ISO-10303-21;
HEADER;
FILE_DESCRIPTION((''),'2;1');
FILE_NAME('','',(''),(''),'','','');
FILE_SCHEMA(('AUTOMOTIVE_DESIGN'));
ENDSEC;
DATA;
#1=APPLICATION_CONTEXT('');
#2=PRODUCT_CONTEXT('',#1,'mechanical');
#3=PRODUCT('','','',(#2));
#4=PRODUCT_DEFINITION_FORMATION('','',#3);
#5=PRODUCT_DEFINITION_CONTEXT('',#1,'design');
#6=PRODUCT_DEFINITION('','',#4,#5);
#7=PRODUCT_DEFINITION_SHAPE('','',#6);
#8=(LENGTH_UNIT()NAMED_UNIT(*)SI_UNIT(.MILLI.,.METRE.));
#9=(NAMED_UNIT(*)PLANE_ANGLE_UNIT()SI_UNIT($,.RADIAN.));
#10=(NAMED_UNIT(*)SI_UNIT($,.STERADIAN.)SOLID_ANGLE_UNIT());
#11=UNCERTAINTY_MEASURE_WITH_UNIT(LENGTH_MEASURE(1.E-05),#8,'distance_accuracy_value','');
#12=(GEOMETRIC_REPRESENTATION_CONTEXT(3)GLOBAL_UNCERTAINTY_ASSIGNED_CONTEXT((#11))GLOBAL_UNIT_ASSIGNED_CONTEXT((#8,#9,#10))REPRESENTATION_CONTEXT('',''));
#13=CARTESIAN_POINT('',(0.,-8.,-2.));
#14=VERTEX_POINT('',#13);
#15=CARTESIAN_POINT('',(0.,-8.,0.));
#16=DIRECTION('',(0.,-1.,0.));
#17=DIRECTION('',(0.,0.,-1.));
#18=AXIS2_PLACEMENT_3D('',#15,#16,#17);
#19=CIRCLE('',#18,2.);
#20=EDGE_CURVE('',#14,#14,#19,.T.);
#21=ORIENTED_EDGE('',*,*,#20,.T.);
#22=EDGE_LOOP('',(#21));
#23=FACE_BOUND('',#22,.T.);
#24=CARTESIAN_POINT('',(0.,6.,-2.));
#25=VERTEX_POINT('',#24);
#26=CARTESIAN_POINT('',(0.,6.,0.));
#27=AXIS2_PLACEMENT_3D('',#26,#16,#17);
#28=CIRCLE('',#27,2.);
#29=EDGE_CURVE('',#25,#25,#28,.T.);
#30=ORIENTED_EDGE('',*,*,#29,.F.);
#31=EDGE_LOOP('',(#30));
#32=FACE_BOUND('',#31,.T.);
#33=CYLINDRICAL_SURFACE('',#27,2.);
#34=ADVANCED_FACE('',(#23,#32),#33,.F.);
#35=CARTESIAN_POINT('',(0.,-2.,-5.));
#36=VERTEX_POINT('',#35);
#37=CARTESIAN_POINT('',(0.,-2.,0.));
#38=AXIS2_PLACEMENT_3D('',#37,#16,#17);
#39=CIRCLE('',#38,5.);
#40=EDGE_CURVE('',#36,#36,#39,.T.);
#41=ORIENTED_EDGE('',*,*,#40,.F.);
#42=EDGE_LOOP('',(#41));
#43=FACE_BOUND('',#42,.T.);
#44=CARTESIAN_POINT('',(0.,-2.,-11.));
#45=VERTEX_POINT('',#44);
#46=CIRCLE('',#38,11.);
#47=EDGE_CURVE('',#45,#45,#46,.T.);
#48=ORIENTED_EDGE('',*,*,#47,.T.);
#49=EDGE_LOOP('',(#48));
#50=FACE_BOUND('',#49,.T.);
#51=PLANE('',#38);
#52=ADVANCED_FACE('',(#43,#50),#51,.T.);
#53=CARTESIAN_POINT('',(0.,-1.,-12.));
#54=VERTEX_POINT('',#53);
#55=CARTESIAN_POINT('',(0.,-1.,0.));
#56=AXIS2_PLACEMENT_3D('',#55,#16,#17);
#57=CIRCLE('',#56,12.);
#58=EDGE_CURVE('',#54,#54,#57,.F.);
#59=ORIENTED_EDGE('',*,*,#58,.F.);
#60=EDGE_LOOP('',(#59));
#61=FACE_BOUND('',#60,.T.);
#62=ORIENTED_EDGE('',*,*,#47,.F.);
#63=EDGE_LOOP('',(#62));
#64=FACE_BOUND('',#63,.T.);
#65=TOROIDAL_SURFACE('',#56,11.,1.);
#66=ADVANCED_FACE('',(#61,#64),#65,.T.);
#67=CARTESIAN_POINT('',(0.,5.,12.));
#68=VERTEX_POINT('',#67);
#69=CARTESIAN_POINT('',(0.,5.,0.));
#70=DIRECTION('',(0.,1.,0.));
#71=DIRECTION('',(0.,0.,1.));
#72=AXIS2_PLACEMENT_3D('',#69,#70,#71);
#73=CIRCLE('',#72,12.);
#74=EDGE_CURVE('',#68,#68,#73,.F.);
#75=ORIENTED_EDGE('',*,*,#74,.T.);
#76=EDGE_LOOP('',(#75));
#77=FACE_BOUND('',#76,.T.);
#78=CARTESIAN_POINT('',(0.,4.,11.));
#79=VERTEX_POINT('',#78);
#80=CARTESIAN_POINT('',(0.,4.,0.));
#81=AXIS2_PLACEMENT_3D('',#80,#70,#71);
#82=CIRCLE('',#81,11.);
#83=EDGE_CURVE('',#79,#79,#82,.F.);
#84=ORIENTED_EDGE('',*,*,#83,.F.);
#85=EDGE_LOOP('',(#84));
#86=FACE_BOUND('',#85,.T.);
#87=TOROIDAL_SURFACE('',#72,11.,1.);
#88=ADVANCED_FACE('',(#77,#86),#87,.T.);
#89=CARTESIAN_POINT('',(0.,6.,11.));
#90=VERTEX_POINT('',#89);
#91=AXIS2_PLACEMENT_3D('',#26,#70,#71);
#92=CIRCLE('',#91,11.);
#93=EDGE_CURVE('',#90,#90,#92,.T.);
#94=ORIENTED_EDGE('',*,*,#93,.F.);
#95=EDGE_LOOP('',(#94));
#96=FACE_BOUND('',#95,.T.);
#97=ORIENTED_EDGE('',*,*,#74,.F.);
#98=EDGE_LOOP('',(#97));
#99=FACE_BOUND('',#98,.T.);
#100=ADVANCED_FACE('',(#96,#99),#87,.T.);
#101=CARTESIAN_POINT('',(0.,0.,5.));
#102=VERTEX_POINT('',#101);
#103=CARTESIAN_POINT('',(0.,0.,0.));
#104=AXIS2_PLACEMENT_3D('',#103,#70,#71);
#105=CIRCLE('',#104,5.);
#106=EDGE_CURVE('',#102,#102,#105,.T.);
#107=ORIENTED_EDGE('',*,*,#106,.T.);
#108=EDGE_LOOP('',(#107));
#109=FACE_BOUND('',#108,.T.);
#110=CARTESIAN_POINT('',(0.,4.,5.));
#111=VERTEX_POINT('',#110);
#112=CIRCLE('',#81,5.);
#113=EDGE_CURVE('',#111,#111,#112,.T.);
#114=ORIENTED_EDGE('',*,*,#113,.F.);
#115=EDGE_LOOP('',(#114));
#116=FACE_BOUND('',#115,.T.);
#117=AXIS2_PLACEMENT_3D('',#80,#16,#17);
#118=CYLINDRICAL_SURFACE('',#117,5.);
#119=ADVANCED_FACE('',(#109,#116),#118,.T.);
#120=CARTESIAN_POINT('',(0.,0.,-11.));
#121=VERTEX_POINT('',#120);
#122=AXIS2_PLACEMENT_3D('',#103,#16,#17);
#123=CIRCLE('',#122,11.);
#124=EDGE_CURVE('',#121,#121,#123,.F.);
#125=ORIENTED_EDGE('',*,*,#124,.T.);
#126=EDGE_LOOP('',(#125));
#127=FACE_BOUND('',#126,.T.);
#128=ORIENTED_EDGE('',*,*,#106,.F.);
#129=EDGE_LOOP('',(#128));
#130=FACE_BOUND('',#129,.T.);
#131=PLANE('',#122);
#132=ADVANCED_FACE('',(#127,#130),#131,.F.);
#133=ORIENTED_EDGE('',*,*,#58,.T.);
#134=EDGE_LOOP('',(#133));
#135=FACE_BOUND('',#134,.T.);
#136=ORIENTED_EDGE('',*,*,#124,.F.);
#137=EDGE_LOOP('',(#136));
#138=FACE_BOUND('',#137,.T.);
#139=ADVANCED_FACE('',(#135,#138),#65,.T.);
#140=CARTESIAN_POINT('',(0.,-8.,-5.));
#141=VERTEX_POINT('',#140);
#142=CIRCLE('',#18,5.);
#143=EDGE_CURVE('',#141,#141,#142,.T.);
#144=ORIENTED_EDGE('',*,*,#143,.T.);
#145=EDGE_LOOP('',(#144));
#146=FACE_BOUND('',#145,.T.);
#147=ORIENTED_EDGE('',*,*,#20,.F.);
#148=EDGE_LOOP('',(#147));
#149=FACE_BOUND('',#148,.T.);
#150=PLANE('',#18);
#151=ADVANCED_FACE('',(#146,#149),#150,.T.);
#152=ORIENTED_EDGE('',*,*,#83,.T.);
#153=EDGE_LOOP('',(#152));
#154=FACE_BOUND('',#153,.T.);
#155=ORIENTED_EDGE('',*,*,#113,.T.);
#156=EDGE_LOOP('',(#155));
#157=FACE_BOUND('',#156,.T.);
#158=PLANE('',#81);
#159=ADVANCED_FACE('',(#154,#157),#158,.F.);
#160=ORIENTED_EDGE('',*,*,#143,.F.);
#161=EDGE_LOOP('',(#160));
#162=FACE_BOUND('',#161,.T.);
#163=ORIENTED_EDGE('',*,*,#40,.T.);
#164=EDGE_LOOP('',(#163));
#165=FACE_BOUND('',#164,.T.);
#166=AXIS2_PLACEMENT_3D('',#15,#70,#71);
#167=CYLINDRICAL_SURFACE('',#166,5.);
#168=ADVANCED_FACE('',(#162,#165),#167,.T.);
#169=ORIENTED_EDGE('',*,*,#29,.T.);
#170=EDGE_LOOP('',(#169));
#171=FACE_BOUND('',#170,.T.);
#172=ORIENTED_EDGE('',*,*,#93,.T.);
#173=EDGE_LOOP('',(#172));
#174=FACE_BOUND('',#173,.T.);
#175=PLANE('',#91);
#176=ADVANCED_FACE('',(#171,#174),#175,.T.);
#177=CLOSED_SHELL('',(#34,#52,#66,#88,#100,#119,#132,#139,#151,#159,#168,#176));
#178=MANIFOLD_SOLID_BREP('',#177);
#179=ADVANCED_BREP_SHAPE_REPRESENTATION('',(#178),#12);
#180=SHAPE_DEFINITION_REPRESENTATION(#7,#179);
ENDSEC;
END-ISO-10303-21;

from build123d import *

# Parameters (mm, degrees)
SKETCH_1_R          = 5
EXTRUDE_1_DEPTH     = 4
SKETCH_2_R          = 12
EXTRUDE_2_DEPTH     = 2
EXTRUDE_START       = 2
SKETCH_3_R          = 12
EXTRUDE_3_DEPTH     = 2
EXTRUDE_START_2     = 6
SKETCH_4_R          = 5
EXTRUDE_4_DEPTH     = 6
SKETCH_5_R          = 2
CUT_EXTRUDE_1_DEPTH = 23
FILLET_2_R          = 1


with BuildPart() as part:
    # 草图1 → 凸台-拉伸1 (new body)
    with BuildSketch(Plane(origin=(0, 0, 0), x_dir=(1, 0, 0), z_dir=(0, 1, 0))):
        with Locations(Location((0, 0, 0), (0, 0, 270))):
            Circle(SKETCH_1_R)
    extrude(amount=EXTRUDE_1_DEPTH)

    # 草图2 → 凸台-拉伸2 (add)
    with BuildSketch(Plane(origin=(0, 4, 0), x_dir=(1, 0, 0), z_dir=(0, 1, 0))):
        with Locations(Location((0, 0, 0), (0, 0, 270))):
            Circle(SKETCH_2_R)
    extrude(amount=EXTRUDE_2_DEPTH)

    # 草图3 → 凸台-拉伸3 (add)
    with BuildSketch(Plane.XZ.offset(EXTRUDE_START)):
        with Locations(Location((0, 0, 0), (0, 0, 90))):
            Circle(SKETCH_3_R)
    extrude(amount=-EXTRUDE_3_DEPTH)

    # 草图4 → 凸台-拉伸4 (add)
    with BuildSketch(Plane(origin=(0, -2, 0), x_dir=(-1, 0, 0), z_dir=(0, -1, 0)).offset(EXTRUDE_START_2)):
        with Locations(Location((0, 0, 0), (0, 0, 270))):
            Circle(SKETCH_4_R)
    extrude(amount=-EXTRUDE_4_DEPTH)

    # 草图5 → 切除-拉伸1 (cut, through all)
    with BuildSketch(Plane.XZ.offset(8)):
        with Locations(Location((0, 0, 0), (0, 0, 270))):
            Circle(SKETCH_5_R)
    extrude(amount=-CUT_EXTRUDE_1_DEPTH, mode=Mode.SUBTRACT)

    # 圆角2
    fillet_2_edges = [part.edges().sort_by_distance(p)[0] for p in [
        (0, -2, -12),
        (0, 4, -12),
        (0, 6, -12),
        (0, 0, -12),
    ]]
    fillet(fillet_2_edges, radius=FILLET_2_R - 0.0001)  # a hair under: the kernel refuses the full size


solid = part.part
